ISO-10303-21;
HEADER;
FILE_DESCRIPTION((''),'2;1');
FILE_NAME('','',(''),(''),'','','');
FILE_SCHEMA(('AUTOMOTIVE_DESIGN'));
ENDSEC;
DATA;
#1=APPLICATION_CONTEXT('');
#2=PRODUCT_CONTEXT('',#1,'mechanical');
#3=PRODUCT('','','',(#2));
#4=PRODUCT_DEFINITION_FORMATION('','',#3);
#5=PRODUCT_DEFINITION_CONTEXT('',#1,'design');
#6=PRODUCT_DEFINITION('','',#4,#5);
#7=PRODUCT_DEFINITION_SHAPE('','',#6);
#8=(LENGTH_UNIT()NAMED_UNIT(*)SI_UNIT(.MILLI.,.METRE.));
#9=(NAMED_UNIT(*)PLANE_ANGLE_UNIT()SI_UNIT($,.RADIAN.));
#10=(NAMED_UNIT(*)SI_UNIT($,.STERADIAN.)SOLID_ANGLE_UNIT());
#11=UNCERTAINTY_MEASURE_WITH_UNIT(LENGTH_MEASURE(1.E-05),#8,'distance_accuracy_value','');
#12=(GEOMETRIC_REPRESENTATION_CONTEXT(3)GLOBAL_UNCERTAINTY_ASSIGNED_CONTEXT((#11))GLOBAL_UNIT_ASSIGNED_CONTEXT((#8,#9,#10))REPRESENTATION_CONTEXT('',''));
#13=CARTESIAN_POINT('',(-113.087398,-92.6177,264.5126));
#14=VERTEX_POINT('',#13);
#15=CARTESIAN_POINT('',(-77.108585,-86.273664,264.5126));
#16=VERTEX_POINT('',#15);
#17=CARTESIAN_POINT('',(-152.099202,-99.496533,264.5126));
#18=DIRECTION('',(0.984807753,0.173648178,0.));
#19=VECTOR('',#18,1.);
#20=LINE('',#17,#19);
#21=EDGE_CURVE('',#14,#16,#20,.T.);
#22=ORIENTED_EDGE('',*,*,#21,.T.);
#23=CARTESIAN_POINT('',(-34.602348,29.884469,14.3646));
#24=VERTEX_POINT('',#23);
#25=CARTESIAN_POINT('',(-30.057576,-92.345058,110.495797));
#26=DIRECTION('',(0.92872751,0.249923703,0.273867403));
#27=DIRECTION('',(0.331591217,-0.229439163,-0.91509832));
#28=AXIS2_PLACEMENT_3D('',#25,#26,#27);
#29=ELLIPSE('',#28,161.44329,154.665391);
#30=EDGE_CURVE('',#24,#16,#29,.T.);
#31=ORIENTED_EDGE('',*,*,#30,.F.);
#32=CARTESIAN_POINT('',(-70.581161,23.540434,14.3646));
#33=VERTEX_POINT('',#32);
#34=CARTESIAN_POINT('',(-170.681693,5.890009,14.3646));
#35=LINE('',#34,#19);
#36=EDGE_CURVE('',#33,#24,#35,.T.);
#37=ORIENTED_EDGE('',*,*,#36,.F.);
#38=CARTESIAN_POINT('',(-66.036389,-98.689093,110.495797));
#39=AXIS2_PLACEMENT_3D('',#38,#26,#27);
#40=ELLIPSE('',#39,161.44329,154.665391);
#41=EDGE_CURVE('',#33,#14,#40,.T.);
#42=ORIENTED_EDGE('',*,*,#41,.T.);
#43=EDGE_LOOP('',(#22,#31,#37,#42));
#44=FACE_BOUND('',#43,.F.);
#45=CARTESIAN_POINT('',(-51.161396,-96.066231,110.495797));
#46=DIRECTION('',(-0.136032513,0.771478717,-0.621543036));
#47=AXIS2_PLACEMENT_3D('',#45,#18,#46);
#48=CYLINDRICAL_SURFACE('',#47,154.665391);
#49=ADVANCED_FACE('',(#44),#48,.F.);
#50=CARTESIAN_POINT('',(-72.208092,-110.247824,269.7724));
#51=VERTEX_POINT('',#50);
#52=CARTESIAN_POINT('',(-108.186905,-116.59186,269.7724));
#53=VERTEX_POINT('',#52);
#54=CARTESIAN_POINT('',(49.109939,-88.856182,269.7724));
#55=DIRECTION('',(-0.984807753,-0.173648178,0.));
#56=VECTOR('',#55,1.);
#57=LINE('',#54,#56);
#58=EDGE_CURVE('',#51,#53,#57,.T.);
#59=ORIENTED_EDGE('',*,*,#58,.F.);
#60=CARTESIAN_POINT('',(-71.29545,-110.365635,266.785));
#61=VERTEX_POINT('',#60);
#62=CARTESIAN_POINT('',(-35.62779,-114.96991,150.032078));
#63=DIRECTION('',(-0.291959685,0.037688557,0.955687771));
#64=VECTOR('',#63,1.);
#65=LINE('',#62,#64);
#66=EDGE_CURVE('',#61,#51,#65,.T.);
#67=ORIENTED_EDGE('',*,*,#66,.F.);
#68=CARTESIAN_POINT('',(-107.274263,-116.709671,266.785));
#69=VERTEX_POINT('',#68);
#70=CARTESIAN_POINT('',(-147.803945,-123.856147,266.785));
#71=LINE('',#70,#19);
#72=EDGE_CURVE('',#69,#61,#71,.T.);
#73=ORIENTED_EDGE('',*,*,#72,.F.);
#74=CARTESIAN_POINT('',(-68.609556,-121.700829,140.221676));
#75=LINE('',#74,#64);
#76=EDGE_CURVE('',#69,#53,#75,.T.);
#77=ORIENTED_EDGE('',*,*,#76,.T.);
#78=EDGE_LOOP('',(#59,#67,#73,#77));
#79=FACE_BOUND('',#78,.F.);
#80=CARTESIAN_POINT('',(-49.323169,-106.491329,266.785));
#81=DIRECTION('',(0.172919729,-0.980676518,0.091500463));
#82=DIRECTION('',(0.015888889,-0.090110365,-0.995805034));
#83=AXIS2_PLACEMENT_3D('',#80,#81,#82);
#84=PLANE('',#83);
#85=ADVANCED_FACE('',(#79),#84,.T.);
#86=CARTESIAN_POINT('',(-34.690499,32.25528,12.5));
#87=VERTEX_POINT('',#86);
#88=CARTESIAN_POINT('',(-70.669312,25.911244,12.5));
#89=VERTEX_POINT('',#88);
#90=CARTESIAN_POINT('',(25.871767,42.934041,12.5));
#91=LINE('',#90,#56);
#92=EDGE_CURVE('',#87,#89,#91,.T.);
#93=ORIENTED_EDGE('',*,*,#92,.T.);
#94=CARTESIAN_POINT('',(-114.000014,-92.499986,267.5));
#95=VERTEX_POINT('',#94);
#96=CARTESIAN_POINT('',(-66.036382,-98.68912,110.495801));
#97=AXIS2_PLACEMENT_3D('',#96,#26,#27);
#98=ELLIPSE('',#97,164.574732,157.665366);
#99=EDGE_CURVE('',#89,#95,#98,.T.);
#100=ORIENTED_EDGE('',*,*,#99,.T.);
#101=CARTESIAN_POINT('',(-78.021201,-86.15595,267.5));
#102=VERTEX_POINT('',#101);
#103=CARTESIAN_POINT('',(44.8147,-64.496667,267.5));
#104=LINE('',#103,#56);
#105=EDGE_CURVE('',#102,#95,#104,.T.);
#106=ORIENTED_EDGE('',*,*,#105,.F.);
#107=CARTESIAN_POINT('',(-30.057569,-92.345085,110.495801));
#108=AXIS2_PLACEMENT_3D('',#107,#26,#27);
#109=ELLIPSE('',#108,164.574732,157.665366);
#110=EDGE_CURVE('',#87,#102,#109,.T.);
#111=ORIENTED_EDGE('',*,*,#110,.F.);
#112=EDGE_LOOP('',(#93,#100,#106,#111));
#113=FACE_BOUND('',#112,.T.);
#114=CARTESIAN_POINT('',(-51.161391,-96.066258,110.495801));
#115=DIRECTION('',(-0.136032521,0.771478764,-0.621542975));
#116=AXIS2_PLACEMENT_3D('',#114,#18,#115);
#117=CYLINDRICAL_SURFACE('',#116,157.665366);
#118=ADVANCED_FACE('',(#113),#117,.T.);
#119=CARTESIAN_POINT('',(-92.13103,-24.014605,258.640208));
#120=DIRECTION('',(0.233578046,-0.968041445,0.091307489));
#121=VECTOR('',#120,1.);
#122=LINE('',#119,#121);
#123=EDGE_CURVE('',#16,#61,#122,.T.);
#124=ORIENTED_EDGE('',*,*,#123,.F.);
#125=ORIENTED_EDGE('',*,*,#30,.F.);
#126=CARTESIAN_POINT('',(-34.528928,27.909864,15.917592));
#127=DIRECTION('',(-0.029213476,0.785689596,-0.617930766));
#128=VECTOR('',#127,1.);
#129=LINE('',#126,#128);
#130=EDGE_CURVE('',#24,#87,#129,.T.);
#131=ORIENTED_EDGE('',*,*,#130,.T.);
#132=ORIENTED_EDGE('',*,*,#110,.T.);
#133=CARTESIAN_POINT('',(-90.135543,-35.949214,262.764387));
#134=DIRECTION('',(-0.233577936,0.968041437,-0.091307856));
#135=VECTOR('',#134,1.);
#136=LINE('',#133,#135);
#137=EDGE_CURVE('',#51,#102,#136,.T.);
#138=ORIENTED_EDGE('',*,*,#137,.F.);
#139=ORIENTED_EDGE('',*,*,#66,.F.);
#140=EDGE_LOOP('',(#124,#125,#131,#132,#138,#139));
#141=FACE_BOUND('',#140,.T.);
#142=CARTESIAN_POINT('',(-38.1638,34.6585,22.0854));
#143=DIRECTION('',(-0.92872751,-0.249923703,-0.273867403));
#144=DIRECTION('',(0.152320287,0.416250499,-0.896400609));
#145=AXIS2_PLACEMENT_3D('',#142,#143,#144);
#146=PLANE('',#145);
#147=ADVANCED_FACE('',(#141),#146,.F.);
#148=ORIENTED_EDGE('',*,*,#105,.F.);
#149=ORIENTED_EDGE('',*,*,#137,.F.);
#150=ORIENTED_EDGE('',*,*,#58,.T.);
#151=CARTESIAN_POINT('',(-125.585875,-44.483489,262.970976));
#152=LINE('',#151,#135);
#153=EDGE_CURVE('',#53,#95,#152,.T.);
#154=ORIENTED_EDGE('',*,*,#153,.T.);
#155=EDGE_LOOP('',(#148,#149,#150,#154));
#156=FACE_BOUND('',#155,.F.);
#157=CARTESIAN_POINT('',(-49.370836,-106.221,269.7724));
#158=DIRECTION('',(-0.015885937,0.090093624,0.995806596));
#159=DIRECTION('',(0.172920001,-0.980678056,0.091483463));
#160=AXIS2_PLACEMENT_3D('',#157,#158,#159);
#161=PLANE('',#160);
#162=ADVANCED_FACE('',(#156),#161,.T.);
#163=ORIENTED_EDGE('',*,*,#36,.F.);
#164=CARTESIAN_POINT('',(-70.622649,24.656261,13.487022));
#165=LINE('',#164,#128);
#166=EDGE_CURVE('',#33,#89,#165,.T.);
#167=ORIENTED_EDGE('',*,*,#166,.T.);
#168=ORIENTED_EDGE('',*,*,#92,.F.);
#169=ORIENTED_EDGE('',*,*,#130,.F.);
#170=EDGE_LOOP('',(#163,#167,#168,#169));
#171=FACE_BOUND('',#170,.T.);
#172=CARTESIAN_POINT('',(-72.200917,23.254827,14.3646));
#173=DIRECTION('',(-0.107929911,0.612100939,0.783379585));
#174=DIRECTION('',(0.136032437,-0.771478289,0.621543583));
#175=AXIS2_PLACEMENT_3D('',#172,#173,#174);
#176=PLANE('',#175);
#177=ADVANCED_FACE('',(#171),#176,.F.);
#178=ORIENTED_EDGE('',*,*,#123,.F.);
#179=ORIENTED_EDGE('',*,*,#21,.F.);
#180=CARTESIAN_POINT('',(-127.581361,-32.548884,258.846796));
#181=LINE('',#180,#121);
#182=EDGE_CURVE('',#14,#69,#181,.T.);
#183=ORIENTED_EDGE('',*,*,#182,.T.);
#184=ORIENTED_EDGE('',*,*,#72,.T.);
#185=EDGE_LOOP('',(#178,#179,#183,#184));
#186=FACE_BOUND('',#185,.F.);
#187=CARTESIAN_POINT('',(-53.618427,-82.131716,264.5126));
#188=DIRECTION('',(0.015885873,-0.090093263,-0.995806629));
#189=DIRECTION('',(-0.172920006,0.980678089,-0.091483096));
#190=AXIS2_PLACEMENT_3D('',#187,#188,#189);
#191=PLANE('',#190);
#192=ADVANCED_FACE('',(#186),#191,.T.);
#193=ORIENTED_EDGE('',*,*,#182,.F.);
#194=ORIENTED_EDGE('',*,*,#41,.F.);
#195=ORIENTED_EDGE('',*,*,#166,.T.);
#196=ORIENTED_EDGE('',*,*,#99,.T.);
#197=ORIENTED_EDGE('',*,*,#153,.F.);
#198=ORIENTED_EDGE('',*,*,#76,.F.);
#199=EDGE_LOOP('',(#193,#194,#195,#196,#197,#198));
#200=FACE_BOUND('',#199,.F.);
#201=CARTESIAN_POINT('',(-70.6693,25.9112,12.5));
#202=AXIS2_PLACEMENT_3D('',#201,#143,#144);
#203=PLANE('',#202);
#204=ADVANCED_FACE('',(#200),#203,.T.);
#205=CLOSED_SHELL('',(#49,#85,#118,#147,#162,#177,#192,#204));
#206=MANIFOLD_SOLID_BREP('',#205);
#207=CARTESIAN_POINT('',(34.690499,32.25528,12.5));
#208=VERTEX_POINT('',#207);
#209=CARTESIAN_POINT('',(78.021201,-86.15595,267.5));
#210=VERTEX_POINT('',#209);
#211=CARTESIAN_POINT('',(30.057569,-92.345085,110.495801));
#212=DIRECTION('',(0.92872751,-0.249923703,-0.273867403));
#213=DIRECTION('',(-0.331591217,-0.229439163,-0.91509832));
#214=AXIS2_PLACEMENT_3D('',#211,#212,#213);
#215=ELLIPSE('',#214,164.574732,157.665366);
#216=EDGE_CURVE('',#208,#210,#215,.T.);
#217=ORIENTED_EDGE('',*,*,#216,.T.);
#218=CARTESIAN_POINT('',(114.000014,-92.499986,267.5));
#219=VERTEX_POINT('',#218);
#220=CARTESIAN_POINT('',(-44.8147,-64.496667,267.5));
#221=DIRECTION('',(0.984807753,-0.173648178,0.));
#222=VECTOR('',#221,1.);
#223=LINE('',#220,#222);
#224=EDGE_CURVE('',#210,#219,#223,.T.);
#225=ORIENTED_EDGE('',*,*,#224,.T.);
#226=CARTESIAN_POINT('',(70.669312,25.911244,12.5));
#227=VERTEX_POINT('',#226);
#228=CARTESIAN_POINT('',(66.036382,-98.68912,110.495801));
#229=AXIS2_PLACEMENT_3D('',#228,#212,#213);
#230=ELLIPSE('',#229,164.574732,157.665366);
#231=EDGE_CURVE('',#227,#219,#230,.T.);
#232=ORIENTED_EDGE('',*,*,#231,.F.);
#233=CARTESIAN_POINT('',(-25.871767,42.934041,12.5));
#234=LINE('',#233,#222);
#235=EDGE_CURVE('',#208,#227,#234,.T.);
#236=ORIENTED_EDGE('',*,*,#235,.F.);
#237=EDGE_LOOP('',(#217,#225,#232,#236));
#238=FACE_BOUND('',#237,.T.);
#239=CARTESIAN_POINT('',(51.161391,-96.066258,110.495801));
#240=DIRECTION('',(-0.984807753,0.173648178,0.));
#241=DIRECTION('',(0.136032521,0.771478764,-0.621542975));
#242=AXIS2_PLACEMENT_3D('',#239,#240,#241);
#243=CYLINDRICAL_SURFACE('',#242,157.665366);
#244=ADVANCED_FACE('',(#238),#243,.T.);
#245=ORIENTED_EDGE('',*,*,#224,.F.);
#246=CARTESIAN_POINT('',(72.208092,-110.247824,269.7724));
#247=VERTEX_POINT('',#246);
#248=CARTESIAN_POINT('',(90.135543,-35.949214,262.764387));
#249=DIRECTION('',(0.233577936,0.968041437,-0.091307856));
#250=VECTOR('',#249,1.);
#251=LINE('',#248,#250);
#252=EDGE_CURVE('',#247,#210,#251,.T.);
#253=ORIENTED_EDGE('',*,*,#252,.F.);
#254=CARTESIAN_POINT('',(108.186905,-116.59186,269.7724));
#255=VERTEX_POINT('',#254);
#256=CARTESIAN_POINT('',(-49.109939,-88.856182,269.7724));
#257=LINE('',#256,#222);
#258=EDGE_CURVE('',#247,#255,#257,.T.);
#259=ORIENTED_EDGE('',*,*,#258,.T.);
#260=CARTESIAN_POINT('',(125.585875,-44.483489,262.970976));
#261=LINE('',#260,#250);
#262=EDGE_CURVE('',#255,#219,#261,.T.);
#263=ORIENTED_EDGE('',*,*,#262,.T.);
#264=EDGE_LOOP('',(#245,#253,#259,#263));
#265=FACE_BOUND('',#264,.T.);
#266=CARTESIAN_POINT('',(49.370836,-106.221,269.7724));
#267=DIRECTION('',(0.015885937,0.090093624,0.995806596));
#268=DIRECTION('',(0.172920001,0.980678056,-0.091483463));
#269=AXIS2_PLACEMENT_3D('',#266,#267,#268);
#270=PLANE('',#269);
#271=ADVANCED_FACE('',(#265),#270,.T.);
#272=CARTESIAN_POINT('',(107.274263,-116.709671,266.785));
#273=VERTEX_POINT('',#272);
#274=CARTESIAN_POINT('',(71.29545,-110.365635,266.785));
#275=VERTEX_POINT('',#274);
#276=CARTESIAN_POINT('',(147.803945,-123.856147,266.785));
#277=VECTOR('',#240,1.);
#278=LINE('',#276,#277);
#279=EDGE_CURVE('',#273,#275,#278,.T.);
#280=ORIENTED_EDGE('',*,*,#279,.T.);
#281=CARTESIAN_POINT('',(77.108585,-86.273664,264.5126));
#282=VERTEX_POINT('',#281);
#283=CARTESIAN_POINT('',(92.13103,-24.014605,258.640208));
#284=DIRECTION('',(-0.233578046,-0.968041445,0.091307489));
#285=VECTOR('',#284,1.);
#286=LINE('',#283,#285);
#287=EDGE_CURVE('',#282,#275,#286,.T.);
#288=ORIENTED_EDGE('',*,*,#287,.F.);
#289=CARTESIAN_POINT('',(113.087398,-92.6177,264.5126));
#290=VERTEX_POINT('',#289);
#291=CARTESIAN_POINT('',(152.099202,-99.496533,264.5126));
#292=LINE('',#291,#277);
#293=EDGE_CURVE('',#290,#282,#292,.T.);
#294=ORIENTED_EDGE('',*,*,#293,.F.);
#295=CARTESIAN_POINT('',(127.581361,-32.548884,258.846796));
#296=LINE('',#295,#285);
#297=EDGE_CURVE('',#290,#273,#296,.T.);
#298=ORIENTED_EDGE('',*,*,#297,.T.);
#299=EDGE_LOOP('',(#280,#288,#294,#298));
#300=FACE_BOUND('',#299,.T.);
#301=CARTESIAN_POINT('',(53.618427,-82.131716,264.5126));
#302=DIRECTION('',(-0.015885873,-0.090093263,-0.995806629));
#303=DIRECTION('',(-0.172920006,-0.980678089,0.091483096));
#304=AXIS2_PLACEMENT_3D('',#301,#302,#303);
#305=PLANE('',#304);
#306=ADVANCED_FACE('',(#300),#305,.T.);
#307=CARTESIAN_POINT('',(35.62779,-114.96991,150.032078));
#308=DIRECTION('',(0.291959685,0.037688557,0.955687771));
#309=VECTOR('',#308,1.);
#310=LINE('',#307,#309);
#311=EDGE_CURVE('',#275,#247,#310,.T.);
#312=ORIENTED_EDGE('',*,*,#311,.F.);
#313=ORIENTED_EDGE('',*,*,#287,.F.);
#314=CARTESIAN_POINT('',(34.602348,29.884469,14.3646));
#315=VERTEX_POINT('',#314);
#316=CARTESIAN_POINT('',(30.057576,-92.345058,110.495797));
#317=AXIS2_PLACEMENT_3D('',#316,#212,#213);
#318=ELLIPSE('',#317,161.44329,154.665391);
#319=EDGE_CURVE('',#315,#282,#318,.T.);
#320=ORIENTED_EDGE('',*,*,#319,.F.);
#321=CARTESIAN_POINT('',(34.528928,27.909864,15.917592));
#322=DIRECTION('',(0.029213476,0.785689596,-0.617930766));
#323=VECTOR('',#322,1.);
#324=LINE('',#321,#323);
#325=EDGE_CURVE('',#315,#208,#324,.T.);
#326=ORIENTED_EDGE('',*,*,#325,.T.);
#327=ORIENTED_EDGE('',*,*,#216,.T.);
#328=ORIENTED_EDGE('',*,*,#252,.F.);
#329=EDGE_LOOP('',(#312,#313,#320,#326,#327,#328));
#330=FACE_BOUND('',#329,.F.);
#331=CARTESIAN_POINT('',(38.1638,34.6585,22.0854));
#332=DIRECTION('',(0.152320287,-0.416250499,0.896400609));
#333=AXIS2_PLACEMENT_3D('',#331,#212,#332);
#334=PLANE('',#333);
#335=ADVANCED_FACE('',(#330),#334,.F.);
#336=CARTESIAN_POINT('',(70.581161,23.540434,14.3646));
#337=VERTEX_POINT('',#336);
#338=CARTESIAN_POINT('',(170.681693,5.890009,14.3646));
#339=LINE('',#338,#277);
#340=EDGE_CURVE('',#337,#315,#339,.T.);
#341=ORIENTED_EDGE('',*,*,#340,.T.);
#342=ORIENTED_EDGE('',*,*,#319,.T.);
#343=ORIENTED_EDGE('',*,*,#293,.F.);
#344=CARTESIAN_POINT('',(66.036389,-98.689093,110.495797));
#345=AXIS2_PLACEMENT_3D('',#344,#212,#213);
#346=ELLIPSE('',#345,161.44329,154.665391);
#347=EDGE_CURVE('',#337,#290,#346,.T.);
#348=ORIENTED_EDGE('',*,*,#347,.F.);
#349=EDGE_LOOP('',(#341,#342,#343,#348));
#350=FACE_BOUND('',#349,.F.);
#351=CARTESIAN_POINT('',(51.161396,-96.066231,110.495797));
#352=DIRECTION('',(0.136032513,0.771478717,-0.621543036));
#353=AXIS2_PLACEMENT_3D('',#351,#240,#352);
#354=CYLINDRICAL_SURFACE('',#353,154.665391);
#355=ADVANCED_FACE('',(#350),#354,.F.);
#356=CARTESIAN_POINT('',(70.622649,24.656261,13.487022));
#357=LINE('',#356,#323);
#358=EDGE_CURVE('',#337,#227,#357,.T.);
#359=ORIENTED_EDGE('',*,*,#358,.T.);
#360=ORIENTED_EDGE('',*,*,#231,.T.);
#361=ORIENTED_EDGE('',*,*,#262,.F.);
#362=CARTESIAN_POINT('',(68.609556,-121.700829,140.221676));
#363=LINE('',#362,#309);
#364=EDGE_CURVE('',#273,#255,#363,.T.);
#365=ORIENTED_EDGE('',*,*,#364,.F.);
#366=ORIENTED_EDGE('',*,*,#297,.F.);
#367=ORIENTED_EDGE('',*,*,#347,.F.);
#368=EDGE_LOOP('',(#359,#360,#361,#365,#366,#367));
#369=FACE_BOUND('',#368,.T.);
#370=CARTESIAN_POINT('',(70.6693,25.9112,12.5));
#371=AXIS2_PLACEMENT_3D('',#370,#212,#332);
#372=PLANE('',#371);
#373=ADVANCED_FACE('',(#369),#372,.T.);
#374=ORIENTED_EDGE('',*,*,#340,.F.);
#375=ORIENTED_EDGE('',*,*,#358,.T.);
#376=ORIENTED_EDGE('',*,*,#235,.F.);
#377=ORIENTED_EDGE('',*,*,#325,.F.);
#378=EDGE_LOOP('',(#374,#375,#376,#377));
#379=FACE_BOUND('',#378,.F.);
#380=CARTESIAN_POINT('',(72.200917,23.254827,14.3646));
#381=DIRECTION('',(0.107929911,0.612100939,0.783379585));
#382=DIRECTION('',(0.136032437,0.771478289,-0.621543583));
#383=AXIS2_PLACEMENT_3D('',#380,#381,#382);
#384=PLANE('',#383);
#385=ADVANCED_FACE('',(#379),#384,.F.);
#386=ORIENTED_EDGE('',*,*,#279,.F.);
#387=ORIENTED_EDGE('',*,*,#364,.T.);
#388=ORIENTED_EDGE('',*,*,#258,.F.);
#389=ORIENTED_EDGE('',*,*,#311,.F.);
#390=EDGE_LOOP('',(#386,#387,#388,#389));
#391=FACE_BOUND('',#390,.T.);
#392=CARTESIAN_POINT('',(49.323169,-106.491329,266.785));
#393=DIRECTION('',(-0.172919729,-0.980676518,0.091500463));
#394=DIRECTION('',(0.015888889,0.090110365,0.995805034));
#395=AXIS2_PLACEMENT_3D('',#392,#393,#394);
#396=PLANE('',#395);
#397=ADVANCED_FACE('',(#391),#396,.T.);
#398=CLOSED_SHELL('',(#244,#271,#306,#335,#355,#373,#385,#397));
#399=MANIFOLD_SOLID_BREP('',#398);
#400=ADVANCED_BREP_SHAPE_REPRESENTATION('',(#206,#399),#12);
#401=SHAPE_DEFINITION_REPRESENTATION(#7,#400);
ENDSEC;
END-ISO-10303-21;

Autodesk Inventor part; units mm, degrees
ref_plane "XY Plane" through (0, 0, 0) normal (0, 0, 1) x (1, 0, 0)
ref_plane "作業平面2" through (70.6693, 25.9112, 12.5) normal (0.9287275, -0.2499237, -0.2738674) x (0.1523203, -0.4162505, 0.8964006)
ref_plane "作業平面1" through (70.6693, 25.9112, 12.5) normal (0, -0.906984, -0.421165) x (0.1523203, -0.4162505, 0.8964006)
ref_plane "作業平面5" through (72.5487, 25.2272, 16.5) normal (0.9848078, -0.1736482, 0) x (0, 0, 1)
ref_plane "作業平面4" through (0, 0, 0) normal (0.9848078, -0.1736482, 0) x (0, 0, 1)
sketch "スケッチ4" plane through (72.5487, 25.2272, 16.5) normal (0.9848078, -0.1736482, 0) x (0, 0, 1)
  arc A0 (-4, -0.3473) -> (251, 108.7407) centre (93.9958, 123.1646) ccw
  arc A1 (-2.1354, 2.0028) -> (248.0126, 109.0151) centre (93.9958, 123.1646) ccw
  line L0 (-2.1354, 2.0028) -> (-4, -0.3473)
  line L1 (251, 108.7407) -> (248.0126, 109.0151)
  line L2 (251, 108.7407) -> (248.0126, 109.0151)
  line L3 (248.0126, 109.0151) -> (250.285, 133.7505)
  line L4 (250.285, 133.7505) -> (253.2724, 133.476)
  line L5 (253.2724, 133.476) -> (251, 108.7407)
  point P0 (-16.5, 37.4419)
  dimension "d10" = 3
extrude "押し出し4" add sketch "スケッチ4" along normal mid plane 200
sketch "スケッチ5" plane through (70.6693, 25.9112, 12.5) normal (0.9287275, -0.2499237, -0.2738674) x (0.1523203, -0.4162505, 0.8964006)
  line L0 (-182.7887, -200.8557) -> (555.7515, -200.8557)
  line L1 (555.7515, -200.8557) -> (555.7515, 275.1143)
  line L2 (555.7515, 275.1143) -> (-182.7887, 275.1143)
  line L3 (-182.7887, 275.1143) -> (-182.7887, -200.8557)
  point P0 (-11.1838, 50.897)
extrude "押し出し5" cut sketch "スケッチ5" along normal through all
ref_plane "作業平面6" through (38.1638, 34.6585, 22.0854) normal (0.9287275, -0.2499237, -0.2738674) x (0.1523203, -0.4162505, 0.8964006)
sketch "スケッチ6" plane through (38.1638, 34.6585, 22.0854) normal (0.9287275, -0.2499237, -0.2738674) x (0.1523203, -0.4162505, 0.8964006)
  line L0 (-129.6846, -185.1212) -> (393.489, -185.1212)
  line L1 (393.489, -185.1212) -> (393.489, 176.7734)
  line L2 (393.489, 176.7734) -> (-129.6846, 176.7734)
  line L3 (-129.6846, 176.7734) -> (-129.6846, -185.1212)
  point P0 (-11.1838, 50.897)
extrude "押し出し6" cut sketch "スケッチ6" against normal through all
mirror "ミラー1" about plane through (0, 0, 0) normal (1, 0, 0)
ref_plane "作業平面8" through (141.4575, -77.8279, 12.5) normal (0.3420201, 0.9396926, 0) x (0, 0, 1)
ref_plane "作業平面7" through (0, 0, 0) normal (0.3420201, 0.9396926, 0) x (0, 0, 1)
properties part number "belt"
